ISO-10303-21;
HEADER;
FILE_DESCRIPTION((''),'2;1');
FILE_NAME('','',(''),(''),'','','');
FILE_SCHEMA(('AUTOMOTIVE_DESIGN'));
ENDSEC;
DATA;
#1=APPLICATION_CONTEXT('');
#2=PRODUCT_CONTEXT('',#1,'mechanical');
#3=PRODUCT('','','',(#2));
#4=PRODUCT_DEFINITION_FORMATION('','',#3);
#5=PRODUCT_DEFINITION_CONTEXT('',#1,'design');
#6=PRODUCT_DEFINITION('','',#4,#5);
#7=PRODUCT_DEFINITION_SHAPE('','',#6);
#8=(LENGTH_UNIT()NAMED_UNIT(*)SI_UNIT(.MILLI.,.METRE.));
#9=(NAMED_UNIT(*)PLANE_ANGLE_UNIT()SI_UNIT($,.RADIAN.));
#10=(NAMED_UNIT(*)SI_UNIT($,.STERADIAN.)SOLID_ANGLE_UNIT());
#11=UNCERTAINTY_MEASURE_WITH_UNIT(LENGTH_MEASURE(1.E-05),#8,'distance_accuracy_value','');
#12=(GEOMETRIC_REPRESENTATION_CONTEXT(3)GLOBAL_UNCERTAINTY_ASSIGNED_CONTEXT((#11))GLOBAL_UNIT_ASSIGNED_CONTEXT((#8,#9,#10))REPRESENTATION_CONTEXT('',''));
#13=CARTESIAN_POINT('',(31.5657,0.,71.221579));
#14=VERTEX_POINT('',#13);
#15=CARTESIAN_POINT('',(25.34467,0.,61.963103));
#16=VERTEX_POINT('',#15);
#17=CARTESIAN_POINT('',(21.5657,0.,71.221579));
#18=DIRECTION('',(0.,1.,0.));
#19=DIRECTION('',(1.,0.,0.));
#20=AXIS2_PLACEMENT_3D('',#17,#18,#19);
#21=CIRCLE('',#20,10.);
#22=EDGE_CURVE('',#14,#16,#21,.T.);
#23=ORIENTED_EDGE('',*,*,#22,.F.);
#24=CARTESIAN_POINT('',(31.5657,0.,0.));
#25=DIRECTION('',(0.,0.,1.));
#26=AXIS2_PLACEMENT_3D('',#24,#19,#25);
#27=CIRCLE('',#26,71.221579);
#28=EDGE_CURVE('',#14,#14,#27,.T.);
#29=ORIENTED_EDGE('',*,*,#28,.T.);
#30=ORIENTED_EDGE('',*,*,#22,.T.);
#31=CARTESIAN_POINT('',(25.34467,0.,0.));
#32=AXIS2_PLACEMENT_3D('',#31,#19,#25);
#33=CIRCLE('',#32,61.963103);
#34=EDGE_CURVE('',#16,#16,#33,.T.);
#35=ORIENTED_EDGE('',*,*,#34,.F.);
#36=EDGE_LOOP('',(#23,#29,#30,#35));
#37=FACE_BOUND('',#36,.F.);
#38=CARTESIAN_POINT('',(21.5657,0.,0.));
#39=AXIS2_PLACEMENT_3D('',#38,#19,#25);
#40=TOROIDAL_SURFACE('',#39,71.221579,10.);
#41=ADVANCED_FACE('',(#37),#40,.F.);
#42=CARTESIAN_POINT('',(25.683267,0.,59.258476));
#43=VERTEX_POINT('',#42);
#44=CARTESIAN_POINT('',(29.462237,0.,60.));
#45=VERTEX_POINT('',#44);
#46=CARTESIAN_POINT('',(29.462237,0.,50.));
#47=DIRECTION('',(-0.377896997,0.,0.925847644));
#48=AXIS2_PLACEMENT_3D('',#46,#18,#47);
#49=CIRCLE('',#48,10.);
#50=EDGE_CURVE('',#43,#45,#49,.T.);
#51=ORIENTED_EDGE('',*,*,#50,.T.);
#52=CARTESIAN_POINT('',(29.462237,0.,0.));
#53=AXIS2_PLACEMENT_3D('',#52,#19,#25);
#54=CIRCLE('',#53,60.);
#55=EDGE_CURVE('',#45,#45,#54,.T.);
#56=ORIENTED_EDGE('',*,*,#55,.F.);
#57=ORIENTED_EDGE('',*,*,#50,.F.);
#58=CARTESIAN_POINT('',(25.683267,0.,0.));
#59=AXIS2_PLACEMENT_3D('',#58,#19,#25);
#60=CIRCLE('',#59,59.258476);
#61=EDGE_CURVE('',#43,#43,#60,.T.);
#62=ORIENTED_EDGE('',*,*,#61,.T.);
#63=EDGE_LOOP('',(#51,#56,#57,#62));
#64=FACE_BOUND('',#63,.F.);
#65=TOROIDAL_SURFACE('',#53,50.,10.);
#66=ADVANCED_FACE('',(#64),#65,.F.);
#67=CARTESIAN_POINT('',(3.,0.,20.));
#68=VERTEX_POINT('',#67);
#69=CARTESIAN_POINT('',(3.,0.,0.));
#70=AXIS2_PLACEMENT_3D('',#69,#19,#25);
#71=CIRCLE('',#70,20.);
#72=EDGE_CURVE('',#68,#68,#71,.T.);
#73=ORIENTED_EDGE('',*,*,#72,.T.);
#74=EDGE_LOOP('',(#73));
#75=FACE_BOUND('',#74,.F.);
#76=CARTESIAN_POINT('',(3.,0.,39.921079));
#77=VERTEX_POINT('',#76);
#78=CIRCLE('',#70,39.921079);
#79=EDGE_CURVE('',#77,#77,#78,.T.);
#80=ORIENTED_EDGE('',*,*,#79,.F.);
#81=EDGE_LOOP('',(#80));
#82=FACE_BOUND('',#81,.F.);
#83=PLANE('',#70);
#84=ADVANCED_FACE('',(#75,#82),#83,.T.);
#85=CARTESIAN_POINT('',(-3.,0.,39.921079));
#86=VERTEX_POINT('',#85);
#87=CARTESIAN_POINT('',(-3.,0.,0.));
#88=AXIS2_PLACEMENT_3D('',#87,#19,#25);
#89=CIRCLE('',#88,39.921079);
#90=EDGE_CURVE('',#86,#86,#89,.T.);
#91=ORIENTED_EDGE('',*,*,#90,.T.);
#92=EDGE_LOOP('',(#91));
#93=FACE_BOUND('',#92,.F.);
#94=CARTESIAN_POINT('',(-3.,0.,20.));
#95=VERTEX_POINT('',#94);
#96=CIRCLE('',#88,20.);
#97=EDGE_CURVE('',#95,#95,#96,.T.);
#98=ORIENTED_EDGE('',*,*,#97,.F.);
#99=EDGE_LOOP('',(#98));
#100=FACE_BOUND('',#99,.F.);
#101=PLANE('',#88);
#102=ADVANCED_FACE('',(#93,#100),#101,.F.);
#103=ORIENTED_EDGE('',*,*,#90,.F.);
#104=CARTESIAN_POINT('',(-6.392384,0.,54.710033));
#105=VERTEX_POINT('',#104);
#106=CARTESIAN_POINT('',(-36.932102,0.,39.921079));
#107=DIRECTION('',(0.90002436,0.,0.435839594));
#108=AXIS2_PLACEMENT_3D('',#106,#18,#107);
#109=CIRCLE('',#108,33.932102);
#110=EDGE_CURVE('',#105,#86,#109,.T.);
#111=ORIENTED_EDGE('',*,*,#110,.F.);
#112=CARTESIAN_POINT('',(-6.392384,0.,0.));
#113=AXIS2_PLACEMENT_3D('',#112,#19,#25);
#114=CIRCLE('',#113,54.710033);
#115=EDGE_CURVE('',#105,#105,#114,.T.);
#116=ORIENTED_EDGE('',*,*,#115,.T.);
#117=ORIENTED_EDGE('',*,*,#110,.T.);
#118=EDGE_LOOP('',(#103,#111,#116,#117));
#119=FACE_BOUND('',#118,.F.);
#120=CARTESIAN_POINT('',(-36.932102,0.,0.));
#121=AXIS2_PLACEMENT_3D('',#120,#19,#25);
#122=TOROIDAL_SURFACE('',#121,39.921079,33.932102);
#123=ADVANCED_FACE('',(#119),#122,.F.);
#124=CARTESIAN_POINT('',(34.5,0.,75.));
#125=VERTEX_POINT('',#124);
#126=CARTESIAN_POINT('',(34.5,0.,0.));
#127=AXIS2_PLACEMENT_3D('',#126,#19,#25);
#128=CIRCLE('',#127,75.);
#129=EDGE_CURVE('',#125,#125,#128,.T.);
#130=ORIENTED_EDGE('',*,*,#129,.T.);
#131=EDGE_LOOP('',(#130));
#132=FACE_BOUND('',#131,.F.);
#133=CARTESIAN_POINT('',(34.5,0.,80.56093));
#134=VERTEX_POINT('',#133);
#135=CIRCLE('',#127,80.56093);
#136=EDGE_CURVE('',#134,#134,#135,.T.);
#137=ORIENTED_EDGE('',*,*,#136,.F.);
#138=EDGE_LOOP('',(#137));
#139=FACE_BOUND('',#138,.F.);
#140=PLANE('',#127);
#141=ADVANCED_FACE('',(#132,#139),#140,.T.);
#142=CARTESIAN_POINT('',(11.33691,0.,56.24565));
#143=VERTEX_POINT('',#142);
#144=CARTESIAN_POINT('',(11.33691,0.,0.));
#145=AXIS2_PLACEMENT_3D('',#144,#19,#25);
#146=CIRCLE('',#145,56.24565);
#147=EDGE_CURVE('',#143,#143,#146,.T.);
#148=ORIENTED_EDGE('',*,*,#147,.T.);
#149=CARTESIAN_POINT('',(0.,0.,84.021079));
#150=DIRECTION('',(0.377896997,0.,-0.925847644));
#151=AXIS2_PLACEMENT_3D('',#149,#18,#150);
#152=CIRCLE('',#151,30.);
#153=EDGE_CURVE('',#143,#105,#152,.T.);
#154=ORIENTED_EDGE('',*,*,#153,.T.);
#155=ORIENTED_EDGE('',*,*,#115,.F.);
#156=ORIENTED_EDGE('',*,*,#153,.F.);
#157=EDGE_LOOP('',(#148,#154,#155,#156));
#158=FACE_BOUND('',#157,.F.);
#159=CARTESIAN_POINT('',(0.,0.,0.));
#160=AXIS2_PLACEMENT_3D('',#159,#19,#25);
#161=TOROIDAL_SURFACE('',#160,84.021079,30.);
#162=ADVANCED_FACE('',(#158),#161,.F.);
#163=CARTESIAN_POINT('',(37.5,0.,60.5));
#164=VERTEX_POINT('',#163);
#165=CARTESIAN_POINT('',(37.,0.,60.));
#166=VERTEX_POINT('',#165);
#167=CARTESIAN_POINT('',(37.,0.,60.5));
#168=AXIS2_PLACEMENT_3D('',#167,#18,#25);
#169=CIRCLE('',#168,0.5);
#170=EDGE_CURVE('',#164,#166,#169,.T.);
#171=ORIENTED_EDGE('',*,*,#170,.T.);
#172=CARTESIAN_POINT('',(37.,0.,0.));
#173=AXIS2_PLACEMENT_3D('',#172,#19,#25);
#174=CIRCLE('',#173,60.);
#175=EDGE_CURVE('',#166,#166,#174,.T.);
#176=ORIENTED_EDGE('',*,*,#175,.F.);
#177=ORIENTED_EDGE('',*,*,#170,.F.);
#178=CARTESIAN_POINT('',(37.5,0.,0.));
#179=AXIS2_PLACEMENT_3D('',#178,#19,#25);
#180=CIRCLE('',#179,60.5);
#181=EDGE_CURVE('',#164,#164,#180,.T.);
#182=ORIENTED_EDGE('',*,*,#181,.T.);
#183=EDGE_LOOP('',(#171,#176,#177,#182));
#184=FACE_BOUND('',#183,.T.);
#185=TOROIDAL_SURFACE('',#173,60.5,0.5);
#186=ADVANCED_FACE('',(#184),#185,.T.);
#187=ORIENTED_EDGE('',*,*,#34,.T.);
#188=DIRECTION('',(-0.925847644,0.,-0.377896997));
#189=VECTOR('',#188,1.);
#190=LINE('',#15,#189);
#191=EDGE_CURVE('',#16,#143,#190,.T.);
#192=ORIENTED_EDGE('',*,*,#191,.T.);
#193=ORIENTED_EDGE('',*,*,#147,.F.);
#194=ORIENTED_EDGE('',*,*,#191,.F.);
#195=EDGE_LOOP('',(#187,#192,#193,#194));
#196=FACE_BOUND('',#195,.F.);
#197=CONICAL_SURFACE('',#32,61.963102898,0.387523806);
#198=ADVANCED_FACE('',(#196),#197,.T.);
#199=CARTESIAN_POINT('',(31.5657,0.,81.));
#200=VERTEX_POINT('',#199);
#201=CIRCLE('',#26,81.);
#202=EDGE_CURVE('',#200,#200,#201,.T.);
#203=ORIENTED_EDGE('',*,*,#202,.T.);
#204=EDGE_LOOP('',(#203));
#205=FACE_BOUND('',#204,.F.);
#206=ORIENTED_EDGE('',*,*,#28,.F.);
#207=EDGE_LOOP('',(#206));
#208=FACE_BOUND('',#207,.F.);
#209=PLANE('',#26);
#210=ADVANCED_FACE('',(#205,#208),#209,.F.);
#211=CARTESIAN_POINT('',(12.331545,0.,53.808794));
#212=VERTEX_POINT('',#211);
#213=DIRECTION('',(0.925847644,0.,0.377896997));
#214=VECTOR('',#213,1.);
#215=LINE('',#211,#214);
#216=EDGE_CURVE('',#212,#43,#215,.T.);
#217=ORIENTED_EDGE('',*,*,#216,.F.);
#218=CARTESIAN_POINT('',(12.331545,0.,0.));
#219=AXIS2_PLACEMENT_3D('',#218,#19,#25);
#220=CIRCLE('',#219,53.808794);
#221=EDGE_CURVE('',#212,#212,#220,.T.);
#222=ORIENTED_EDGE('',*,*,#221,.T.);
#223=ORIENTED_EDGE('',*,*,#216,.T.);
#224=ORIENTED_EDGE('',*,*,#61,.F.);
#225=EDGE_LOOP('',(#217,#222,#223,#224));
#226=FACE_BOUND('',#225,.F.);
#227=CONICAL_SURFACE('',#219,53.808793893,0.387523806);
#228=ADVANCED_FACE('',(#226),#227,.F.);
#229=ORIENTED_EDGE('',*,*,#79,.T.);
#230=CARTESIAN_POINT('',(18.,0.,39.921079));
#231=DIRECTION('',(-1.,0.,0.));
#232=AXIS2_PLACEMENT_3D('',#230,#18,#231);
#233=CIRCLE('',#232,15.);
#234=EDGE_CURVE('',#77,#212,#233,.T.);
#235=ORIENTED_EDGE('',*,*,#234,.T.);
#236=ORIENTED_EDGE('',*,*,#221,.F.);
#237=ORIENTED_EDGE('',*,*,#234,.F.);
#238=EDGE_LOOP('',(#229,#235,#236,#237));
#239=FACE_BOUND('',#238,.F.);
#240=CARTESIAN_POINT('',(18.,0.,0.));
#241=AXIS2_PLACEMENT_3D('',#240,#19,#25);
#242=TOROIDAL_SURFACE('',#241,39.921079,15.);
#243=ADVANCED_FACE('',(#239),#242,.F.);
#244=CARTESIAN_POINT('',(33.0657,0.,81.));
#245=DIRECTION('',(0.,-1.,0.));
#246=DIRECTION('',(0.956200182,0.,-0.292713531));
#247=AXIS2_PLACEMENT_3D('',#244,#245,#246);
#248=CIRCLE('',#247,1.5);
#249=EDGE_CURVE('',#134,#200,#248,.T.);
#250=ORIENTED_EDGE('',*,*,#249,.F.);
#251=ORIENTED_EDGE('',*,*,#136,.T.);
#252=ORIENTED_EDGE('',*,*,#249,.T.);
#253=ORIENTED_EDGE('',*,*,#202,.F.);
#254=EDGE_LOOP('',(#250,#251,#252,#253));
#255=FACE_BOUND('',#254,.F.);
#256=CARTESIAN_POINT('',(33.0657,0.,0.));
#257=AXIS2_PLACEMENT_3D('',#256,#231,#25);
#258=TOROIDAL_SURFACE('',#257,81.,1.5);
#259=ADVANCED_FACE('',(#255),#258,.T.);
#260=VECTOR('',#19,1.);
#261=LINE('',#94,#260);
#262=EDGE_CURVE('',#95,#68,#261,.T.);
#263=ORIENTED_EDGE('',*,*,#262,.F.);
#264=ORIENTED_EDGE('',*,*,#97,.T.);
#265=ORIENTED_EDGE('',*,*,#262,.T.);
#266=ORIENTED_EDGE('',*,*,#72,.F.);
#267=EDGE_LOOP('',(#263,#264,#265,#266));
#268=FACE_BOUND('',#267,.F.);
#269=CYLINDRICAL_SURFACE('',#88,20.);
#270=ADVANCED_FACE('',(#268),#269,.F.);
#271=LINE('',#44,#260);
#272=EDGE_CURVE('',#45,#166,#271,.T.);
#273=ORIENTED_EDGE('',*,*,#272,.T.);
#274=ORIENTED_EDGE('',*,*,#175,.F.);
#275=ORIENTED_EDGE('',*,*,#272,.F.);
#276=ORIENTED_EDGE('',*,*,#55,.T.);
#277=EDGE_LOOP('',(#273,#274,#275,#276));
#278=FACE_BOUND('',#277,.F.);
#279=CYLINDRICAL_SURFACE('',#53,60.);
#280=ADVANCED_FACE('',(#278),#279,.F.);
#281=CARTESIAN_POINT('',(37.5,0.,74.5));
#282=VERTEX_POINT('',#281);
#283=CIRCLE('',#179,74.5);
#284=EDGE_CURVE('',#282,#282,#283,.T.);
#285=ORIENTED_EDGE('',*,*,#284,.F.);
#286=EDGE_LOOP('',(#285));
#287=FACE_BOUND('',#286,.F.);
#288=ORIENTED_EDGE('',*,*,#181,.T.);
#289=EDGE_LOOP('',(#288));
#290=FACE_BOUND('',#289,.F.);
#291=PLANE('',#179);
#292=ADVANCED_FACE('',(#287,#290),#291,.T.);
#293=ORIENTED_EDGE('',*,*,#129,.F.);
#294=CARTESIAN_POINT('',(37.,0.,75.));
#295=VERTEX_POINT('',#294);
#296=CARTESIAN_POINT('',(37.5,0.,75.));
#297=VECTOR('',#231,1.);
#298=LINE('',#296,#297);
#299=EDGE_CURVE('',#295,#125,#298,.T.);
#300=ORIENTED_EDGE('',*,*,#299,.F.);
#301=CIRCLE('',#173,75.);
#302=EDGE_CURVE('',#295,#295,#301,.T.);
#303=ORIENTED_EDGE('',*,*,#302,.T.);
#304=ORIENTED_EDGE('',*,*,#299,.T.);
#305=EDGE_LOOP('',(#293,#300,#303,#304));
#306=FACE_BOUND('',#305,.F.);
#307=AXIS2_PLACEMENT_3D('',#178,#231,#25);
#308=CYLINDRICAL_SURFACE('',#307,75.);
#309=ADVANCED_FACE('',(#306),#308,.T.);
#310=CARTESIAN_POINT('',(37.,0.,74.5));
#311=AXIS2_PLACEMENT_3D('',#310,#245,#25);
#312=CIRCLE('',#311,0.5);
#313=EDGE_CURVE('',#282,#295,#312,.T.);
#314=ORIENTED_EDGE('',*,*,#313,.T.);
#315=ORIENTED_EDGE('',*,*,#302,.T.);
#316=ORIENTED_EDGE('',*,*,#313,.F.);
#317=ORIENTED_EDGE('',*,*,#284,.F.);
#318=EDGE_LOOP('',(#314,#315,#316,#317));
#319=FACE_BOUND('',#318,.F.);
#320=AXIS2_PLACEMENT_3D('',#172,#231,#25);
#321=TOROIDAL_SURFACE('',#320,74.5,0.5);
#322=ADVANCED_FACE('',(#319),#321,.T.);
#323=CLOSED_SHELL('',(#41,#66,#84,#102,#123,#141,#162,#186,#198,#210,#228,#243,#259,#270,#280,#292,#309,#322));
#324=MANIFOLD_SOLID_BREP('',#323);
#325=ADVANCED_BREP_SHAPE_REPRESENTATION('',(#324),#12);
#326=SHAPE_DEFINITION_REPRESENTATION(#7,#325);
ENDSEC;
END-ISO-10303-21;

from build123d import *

# Parameters (mm, degrees)
F2_R = 0.5


# Not quite as in the source:
# - a feature names something its author has since deleted; it is built from what else it names


with BuildPart() as f1:
    # F0 (on Front) → F1 (revolve)
    with BuildSketch(Plane.XZ):
        with BuildLine():
            Line((37.5, 60), (37.5, 75))
            Line((37.5, 75), (34.5, 75))
            Line((34.5, 75), (34.5, 80.5609297038))
            ThreePointArc((34.5, 80.5609297038), (33.2876789928, 82.4834841439), (31.5656997263, 81))
            Line((31.5656997263, 81), (31.5656997263, 71.2215793345))
            ThreePointArc((31.5656997263, 71.2215793345), (29.8659918821, 65.6443802051), (25.3446697006, 61.9631028976))
            Line((25.3446697006, 61.9631028976), (11.3369099228, 56.245649927))
            ThreePointArc((11.3369099228, 56.245649927), (2.5887477284, 54.1329815199), (-6.3923836679, 54.7100330088))
            ThreePointArc((-6.3923836679, 54.7100330088), (-3.8589680114, 47.5076038142), (-3, 39.9210792379))
            Line((-3, 39.9210792379), (-3, 20))
            Line((-3, 20), (0, 20))
            Line((0, 20), (3, 20))
            Line((3, 20), (3, 39.9210792379))
            ThreePointArc((3, 39.9210792379), (5.5495617663, 48.2868779319), (12.3315450386, 53.8087938933))
            Line((12.3315450386, 53.8087938933), (25.6832672705, 59.258476437))
            ThreePointArc((25.6832672705, 59.258476437), (27.5367197, 59.8128681936), (29.4622372448, 60))
            Line((29.4622372448, 60), (37.5, 60))
        make_face()
    revolve(axis=Axis((8.4361489862, 0, 0), (1, 0, 0)))

    # F2
    f2_edges = [f1.edges().sort_by_distance(p)[0] for p in [
        (37.5, 0, -60),
        (37.5, 0, -75),
    ]]
    fillet(f2_edges, radius=F2_R)


solid = f1.part
